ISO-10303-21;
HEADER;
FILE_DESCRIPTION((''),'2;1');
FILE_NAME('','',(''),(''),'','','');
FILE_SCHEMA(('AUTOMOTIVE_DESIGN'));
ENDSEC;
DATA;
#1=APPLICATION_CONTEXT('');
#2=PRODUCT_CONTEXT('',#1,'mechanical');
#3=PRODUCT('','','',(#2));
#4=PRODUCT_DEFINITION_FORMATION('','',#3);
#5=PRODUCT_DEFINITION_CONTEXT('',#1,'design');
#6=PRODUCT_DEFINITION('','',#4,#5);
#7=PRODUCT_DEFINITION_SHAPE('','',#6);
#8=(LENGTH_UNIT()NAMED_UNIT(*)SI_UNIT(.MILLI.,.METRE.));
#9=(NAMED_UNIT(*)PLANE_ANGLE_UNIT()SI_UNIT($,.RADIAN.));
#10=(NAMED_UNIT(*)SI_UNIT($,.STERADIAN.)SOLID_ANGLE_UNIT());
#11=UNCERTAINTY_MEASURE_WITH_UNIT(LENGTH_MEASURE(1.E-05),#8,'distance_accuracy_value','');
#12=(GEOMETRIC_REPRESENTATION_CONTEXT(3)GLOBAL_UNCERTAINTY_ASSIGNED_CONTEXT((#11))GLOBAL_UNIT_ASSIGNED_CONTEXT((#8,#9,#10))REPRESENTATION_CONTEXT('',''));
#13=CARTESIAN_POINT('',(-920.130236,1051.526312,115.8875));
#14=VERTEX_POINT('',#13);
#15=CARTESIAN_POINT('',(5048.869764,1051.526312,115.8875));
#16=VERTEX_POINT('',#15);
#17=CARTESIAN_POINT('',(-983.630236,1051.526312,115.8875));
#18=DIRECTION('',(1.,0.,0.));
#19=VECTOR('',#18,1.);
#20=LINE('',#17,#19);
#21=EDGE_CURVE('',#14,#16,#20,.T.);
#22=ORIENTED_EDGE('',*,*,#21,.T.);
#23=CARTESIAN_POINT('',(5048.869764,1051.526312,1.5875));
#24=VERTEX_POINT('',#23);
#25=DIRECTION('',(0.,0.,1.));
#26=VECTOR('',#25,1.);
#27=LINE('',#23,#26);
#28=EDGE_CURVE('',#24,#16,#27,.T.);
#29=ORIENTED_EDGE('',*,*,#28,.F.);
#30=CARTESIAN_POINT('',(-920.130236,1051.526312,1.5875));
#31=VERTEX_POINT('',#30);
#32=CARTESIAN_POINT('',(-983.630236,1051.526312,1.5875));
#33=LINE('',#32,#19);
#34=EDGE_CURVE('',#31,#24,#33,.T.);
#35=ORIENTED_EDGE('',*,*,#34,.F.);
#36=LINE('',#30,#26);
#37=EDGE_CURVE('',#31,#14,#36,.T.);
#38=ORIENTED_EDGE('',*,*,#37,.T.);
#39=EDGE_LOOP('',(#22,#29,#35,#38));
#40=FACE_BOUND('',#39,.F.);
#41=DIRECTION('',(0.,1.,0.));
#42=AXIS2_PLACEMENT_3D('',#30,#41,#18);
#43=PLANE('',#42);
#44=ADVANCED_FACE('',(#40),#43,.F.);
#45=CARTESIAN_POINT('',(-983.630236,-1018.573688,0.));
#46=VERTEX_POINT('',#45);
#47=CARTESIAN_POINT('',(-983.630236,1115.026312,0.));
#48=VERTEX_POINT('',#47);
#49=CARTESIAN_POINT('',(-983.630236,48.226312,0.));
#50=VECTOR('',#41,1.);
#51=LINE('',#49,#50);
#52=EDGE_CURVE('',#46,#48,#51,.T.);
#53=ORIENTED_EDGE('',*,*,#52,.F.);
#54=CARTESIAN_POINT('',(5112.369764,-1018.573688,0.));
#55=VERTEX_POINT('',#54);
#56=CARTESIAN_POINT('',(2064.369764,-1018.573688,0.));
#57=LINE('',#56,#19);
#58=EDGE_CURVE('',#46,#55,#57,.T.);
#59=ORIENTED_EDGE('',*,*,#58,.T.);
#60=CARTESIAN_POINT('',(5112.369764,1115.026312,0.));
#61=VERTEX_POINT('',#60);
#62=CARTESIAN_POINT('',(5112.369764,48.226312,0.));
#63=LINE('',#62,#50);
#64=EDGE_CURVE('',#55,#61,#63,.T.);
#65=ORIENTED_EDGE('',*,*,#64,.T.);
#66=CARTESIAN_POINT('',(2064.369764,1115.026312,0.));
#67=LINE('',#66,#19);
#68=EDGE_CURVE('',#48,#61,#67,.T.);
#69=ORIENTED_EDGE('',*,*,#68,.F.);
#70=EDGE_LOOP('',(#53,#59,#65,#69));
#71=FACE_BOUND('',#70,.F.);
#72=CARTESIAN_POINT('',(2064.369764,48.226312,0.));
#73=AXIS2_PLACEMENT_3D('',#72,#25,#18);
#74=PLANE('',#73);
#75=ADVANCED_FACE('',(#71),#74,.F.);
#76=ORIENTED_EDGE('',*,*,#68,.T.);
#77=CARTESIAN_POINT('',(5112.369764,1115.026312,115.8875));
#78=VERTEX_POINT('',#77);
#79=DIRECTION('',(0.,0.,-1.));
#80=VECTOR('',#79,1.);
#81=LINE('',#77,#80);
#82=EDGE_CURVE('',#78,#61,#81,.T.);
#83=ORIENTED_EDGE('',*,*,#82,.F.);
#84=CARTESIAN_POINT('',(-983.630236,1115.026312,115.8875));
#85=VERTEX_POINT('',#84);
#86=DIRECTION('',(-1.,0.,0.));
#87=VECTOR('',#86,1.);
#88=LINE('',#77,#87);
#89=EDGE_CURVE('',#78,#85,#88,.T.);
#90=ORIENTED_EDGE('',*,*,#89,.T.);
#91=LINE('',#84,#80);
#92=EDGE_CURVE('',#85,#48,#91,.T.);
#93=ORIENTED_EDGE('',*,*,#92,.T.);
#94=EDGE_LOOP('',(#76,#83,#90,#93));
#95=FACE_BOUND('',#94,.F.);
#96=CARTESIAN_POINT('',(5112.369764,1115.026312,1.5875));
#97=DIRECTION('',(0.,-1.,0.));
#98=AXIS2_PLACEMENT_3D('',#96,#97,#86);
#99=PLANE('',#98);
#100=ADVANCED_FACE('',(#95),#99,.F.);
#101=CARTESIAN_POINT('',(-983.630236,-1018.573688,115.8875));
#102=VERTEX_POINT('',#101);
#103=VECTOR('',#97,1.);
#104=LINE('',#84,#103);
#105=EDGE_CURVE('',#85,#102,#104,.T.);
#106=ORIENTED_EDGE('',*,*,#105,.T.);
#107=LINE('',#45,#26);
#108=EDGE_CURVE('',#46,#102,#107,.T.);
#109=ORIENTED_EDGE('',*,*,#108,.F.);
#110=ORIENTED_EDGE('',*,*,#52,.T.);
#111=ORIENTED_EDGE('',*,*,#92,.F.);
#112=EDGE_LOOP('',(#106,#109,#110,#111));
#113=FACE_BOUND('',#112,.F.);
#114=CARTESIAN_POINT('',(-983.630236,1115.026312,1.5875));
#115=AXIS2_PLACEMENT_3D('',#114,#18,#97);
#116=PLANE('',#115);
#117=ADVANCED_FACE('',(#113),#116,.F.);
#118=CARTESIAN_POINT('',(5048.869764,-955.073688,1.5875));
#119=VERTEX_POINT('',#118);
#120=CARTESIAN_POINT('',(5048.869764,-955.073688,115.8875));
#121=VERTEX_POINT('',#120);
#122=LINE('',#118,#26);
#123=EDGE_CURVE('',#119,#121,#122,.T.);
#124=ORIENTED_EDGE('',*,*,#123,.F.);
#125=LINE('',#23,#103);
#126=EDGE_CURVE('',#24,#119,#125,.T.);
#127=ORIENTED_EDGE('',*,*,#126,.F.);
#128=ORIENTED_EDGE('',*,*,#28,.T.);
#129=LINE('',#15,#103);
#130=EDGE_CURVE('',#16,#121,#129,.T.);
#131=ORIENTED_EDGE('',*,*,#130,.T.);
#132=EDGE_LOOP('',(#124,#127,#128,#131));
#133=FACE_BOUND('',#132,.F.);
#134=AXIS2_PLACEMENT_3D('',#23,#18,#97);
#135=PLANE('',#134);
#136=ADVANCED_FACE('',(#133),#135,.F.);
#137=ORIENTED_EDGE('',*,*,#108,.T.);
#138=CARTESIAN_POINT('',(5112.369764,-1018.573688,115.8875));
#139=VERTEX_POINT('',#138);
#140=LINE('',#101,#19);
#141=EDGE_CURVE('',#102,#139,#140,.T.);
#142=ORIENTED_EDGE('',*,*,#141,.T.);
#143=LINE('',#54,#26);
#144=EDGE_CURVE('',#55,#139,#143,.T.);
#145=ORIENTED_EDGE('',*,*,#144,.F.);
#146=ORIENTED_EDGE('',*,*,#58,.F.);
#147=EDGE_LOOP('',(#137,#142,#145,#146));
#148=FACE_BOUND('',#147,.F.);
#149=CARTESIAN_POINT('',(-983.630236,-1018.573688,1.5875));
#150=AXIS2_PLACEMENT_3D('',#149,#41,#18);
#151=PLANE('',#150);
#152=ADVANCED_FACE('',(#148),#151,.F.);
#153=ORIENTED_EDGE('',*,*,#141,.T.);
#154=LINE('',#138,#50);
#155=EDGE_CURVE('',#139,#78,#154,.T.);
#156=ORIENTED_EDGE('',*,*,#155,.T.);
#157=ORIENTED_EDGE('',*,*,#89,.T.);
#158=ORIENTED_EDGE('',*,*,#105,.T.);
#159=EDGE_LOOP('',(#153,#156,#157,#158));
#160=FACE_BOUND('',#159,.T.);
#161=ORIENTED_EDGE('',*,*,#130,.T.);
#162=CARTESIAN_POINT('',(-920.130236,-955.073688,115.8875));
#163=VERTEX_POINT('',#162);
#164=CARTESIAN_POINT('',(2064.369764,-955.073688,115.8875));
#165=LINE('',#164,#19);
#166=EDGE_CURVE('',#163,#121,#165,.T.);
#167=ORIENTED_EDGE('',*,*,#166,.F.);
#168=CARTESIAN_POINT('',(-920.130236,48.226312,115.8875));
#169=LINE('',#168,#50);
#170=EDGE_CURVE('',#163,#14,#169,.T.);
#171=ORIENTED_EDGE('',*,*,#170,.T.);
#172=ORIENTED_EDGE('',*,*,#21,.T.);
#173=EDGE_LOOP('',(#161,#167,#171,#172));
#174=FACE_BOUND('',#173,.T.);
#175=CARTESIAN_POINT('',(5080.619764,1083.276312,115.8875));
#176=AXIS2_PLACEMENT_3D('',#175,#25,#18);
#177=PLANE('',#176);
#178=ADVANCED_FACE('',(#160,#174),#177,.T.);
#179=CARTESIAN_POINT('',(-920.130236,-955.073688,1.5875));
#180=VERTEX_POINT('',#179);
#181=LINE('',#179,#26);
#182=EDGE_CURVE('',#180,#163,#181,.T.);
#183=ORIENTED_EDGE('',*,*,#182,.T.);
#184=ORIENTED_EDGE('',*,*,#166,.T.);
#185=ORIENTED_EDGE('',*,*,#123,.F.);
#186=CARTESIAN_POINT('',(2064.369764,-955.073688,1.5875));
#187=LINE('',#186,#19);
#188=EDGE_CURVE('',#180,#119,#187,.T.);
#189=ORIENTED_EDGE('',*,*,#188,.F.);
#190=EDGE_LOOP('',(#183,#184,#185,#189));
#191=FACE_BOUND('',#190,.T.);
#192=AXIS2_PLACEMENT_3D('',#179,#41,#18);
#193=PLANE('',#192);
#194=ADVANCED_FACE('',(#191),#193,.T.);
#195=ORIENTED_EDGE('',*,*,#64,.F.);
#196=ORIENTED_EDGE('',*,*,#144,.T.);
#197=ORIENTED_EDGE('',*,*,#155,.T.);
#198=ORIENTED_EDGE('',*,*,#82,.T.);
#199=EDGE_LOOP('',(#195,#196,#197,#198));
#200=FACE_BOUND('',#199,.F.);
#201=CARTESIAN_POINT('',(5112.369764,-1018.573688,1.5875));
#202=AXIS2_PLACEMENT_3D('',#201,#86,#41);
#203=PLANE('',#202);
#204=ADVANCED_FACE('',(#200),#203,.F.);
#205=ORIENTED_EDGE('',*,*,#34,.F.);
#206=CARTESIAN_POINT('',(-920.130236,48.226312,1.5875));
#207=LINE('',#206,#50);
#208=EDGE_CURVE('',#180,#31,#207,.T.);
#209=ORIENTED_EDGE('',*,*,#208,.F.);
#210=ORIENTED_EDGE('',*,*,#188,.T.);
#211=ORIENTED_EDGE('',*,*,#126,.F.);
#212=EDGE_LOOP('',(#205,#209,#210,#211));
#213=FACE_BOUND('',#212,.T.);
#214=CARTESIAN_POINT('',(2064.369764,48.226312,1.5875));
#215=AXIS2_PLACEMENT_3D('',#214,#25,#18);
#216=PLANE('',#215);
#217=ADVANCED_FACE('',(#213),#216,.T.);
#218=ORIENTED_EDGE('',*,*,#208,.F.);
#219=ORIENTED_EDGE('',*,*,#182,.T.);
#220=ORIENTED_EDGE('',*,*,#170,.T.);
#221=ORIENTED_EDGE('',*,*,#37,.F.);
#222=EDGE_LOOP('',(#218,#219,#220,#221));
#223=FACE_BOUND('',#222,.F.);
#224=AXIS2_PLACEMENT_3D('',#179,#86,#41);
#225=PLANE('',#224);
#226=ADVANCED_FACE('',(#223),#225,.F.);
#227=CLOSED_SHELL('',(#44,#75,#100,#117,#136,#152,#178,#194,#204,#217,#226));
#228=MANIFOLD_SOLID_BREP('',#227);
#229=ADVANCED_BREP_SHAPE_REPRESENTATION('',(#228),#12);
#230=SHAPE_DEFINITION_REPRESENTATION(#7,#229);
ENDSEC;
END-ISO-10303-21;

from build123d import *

# Parameters (mm, degrees)
F0_W     = 6096
F0_H     = 2133.6
F1_DEPTH = 1.5875
F2_W     = 63.5
F2_H     = 63.5
F2_W_2   = 5969
F2_H_2   = 2006.6
F3_DEPTH = 114.3


# Not quite as in the source:
# - a length typed as a fraction of an inch, garbled in the dataset ("3 / 203.2 mm" for 3/8 in), is restored


with BuildPart() as f1:
    # F0 (on Top) → F1 (new body)
    with BuildSketch(Plane.XY):
        with Locations((2064.3697643517, 48.2263118029)):
            Rectangle(F0_W, F0_H)
    extrude(amount=F1_DEPTH)

    # F2 (on face) → F3 (join)
    with BuildSketch(Plane.XY.offset(1.5875)):
        with Locations((5080.6197643517, 1083.2763118029)):
            Rectangle(F2_W, F2_H)
        with Locations((2064.3697643517, 1083.2763118029)):
            Rectangle(F2_W_2, F2_H)
        with Locations((5080.6197643517, 48.2263118029)):
            Rectangle(F2_W, F2_H_2)
        with Locations((-951.8802356483, 1083.2763118029)):
            Rectangle(F2_W, F2_H)
        with Locations((5080.6197643517, -986.8236881971)):
            Rectangle(F2_W, F2_H)
        with Locations((-951.8802356483, 48.2263118029)):
            Rectangle(F2_W, F2_H_2)
        with Locations((2064.3697643517, -986.8236881971)):
            Rectangle(F2_W_2, F2_H)
        with Locations((-951.8802356483, -986.8236881971)):
            Rectangle(F2_W, F2_H)
    extrude(amount=F3_DEPTH)


solid = f1.part
